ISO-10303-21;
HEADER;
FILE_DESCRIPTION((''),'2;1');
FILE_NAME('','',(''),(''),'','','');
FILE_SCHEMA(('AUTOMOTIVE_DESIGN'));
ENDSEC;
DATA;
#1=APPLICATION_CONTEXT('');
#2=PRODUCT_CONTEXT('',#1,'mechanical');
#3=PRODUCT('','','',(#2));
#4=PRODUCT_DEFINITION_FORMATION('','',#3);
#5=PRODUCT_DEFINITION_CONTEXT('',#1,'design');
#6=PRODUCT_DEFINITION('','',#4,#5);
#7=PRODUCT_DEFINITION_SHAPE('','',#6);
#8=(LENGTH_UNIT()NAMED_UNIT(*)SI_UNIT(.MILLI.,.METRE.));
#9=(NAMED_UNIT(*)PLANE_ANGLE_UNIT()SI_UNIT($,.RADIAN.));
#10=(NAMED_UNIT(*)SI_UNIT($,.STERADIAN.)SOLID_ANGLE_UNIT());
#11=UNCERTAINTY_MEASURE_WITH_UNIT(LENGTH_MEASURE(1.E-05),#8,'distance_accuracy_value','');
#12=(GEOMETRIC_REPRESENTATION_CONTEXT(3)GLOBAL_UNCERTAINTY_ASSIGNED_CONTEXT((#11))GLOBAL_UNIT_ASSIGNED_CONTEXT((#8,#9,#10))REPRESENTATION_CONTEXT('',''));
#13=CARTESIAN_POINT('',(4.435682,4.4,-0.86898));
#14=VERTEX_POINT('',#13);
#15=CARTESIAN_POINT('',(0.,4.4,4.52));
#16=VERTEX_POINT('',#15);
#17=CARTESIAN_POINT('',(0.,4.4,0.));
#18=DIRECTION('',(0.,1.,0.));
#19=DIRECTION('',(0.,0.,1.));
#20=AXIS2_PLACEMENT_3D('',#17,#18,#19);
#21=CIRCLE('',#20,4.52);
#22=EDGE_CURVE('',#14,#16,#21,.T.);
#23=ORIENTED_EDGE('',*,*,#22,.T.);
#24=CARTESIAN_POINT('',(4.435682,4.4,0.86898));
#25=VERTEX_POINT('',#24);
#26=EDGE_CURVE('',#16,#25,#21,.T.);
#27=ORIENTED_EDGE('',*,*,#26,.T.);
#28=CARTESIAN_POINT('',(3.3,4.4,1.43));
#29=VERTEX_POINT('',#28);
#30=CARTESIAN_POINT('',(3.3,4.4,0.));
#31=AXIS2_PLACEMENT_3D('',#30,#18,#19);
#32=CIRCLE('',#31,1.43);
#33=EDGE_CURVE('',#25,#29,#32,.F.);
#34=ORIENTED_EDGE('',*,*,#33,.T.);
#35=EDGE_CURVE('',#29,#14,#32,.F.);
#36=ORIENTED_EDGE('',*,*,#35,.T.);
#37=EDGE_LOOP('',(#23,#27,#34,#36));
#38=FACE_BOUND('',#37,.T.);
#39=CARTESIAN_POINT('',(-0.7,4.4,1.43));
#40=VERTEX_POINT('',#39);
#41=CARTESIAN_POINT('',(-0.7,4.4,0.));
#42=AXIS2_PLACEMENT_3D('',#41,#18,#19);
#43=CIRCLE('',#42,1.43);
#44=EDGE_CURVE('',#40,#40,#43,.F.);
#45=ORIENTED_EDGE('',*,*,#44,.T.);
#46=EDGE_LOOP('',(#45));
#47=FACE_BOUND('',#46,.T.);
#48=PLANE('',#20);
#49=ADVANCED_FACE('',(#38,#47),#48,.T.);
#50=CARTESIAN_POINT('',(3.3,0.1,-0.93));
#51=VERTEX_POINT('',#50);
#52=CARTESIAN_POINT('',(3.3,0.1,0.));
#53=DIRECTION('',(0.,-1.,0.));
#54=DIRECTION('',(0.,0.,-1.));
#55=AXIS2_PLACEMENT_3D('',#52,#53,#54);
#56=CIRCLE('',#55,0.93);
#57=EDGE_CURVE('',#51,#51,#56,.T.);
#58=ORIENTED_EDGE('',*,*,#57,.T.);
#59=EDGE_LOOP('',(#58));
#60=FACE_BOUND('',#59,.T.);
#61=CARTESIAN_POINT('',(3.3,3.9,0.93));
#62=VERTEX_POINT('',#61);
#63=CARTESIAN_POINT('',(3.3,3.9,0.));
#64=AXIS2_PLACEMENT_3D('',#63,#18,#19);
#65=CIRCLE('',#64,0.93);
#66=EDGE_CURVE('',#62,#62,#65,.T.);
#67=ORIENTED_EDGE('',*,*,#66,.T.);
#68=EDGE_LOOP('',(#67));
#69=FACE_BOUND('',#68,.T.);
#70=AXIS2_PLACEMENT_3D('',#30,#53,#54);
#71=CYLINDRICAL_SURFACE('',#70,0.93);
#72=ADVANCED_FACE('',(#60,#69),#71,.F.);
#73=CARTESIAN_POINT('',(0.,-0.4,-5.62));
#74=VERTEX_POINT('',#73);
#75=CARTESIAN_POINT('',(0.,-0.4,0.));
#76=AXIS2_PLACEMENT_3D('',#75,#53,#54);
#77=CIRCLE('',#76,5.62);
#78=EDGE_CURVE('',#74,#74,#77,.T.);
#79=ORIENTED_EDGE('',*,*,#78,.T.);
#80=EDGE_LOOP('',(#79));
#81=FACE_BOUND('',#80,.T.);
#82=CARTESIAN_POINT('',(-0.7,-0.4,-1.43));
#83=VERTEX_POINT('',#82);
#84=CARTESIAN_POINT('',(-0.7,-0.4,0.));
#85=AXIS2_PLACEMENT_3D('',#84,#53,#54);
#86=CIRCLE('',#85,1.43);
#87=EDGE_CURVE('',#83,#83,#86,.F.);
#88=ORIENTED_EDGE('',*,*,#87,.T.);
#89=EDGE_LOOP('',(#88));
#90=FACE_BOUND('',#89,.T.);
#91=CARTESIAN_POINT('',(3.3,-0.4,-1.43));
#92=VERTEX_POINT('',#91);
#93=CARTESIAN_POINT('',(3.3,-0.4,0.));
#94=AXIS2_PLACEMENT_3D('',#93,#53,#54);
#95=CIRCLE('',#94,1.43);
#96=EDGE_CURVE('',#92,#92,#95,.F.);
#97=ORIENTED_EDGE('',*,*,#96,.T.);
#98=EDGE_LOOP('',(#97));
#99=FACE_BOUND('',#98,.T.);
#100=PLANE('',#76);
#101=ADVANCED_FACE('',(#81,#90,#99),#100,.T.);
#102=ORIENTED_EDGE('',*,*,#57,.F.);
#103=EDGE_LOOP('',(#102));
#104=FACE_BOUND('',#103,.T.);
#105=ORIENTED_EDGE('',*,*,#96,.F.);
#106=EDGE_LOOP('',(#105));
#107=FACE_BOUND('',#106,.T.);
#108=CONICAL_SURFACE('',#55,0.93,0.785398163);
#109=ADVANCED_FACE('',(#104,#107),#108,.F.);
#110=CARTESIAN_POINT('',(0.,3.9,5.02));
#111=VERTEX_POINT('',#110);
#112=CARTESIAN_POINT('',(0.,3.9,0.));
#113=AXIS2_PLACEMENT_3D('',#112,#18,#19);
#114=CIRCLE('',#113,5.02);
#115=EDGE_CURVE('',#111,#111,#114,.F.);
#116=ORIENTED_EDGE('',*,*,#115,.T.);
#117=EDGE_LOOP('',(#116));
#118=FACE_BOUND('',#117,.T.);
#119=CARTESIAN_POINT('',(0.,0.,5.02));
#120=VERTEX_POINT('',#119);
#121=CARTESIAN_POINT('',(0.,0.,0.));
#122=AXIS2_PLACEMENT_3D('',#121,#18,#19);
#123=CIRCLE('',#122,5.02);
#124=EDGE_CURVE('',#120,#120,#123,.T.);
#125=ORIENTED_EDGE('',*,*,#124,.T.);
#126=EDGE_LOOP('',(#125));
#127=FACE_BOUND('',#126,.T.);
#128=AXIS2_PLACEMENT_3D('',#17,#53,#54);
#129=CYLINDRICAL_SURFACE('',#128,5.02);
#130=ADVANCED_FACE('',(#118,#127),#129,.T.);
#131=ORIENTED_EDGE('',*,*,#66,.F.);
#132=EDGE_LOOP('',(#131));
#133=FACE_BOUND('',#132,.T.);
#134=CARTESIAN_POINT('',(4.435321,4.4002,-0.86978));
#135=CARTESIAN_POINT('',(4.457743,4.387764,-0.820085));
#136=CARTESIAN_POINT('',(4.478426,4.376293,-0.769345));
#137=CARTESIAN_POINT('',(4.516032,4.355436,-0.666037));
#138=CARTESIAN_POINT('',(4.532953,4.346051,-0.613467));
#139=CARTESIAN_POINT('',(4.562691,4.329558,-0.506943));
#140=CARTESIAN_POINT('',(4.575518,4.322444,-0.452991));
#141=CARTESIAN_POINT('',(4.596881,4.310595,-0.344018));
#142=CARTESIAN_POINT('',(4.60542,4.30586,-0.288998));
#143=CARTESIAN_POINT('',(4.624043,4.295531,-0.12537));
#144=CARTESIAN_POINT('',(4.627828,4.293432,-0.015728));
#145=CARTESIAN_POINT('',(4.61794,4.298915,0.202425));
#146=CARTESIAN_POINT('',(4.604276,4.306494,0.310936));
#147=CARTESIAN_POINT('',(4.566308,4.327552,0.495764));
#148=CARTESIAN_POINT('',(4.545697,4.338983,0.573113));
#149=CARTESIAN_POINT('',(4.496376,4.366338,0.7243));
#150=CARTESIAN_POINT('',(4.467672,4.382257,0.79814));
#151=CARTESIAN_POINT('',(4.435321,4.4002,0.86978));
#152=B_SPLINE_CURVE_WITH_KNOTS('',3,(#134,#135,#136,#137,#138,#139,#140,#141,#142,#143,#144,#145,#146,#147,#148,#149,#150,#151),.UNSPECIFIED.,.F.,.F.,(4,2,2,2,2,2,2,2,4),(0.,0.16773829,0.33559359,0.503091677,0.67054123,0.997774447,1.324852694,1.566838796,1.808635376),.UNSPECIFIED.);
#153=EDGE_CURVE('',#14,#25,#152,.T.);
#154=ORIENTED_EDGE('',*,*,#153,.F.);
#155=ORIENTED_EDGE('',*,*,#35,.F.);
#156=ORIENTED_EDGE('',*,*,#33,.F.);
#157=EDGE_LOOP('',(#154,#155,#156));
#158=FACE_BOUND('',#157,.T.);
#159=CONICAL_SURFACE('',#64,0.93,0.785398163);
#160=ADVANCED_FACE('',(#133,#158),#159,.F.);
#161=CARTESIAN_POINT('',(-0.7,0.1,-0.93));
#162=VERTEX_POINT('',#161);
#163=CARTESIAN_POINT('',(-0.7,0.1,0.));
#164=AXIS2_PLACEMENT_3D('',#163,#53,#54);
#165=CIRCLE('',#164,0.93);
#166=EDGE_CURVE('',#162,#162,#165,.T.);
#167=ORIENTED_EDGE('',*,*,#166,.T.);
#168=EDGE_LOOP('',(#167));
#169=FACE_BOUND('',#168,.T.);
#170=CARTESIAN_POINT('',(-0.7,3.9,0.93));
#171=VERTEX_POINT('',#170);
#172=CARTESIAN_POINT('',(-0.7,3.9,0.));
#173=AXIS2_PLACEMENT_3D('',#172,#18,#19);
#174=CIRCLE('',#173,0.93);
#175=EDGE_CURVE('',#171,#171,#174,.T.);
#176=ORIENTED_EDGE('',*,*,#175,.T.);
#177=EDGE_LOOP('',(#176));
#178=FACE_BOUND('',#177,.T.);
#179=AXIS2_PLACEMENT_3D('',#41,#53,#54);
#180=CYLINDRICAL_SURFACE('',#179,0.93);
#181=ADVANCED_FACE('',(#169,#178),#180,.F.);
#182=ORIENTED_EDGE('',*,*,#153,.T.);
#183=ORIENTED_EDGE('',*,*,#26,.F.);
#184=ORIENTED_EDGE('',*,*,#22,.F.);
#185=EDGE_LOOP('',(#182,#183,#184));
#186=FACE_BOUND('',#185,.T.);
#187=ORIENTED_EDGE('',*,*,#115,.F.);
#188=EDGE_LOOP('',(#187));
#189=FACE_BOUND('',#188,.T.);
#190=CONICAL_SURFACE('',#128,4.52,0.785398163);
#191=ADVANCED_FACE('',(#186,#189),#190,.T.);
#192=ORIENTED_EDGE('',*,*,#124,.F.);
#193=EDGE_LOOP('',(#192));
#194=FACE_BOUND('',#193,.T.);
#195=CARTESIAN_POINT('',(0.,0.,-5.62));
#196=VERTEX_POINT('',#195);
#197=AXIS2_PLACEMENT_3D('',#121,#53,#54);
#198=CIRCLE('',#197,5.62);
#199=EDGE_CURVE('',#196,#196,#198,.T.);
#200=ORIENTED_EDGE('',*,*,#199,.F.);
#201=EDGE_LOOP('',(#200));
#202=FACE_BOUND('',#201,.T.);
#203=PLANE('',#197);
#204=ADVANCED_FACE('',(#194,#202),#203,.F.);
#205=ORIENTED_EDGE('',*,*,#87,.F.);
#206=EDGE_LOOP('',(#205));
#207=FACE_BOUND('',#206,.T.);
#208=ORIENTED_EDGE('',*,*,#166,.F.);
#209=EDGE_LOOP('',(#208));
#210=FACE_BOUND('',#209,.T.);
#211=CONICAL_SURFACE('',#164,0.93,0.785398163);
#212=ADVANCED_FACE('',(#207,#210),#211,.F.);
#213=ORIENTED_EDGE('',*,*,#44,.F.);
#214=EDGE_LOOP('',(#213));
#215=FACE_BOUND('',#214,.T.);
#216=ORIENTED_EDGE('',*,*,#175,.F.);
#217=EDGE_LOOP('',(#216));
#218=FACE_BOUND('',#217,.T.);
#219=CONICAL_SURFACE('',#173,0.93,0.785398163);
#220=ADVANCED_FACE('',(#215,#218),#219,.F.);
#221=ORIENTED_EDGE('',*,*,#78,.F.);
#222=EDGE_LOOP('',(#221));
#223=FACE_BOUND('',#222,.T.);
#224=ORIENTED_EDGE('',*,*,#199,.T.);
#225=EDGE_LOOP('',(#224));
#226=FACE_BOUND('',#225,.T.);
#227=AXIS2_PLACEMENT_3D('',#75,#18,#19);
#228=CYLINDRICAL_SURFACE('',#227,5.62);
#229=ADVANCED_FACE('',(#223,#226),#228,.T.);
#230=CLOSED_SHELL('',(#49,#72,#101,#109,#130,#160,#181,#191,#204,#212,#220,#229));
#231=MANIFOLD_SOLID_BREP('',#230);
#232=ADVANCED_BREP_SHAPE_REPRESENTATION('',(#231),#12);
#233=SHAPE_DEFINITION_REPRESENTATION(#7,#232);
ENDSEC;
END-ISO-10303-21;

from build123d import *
from build123d.topology import SkipClean

# Parameters (mm, degrees)
SKETCH_1_R      = 5.02
SKETCH_1_R_2    = 0.93
EXTRUDE_1_DEPTH = 4.4
EXTRUDE_START   = 0.4
SKETCH_3_R      = 5.62
SKETCH_3_R_2    = 0.93
EXTRUDE_2_DEPTH = 0.4
CHAMFER_1_SIZE  = 0.5


with BuildPart() as part:
    # 草图1 → 凸台-拉伸1 (new body)
    with BuildSketch(Plane(origin=(0, 0, 0), x_dir=(1, 0, 0), z_dir=(0, 1, 0))):
        with Locations(Location((0, 0, 0), (0, 0, 270))):
            Circle(SKETCH_1_R)
        with Locations(Location((3.3, 0, 0), (0, 0, 270))):
            Circle(SKETCH_1_R_2, mode=Mode.SUBTRACT)
        with Locations(Location((-0.7, 0, 0), (0, 0, 90))):
            Circle(SKETCH_1_R_2, mode=Mode.SUBTRACT)
    extrude(amount=EXTRUDE_1_DEPTH)

    # 草图3 → 凸台-拉伸2 (add)
    with SkipClean():  # the faces are left unmerged after this step: merging them gives an invalid solid
        with BuildSketch(Plane.XZ.offset(EXTRUDE_START)):
            with Locations(Location((0, 0, 0), (0, 0, 270))):
                Circle(SKETCH_3_R)
            with Locations(Location((3.3, 0, 0), (0, 0, 270))):
                Circle(SKETCH_3_R_2, mode=Mode.SUBTRACT)
            with Locations(Location((-0.7, 0, 0), (0, 0, 270))):
                Circle(SKETCH_3_R_2, mode=Mode.SUBTRACT)
        extrude(amount=-EXTRUDE_2_DEPTH)

    # 倒角1
    # the kernel refuses this chamfer: 0.5 mm, written as the material it takes off along each edge
    with BuildSketch(Plane(origin=(3.3, -0.4, 0), x_dir=(0, 0, -1), z_dir=(-1, 0, 0))) as chamfer_1_piece_1:
        Polygon((0.93 + CHAMFER_1_SIZE, 0), (0.93, -CHAMFER_1_SIZE), (0.93, 0), align=None)
    revolve(axis=Axis((3.3, -0.4, 0), (0, -1, 0)), mode=Mode.SUBTRACT)
    with BuildSketch(Plane(origin=(-0.7, -0.4, 0), x_dir=(0, 0, -1), z_dir=(-1, 0, 0))) as chamfer_1_piece_2:
        Polygon((0.93 + CHAMFER_1_SIZE, 0), (0.93, -CHAMFER_1_SIZE), (0.93, 0), align=None)
    revolve(axis=Axis((-0.7, -0.4, 0), (0, -1, 0)), mode=Mode.SUBTRACT)
    with BuildSketch(Plane(origin=(0, 4.4, 0), x_dir=(0, 0, 1), z_dir=(-1, 0, 0))) as chamfer_1_piece_3:
        Polygon((5.02, -CHAMFER_1_SIZE), (5.02 - CHAMFER_1_SIZE, 0), (5.02, 0), align=None)
    revolve(axis=Axis((0, 4.4, 0), (0, 1, 0)), mode=Mode.SUBTRACT)
    with BuildSketch(Plane(origin=(3.3, 4.4, 0), x_dir=(0, 0, 1), z_dir=(-1, 0, 0))) as chamfer_1_piece_4:
        Polygon((0.93 + CHAMFER_1_SIZE, 0), (0.93, -CHAMFER_1_SIZE), (0.93, 0), align=None)
    revolve(axis=Axis((3.3, 4.4, 0), (0, 1, 0)), mode=Mode.SUBTRACT)
    with BuildSketch(Plane(origin=(-0.7, 4.4, 0), x_dir=(0, 0, -1), z_dir=(1, 0, 0))) as chamfer_1_piece_5:
        Polygon((0.93 + CHAMFER_1_SIZE, 0), (0.93, -CHAMFER_1_SIZE), (0.93, 0), align=None)
    revolve(axis=Axis((-0.7, 4.4, 0), (0, 1, 0)), mode=Mode.SUBTRACT)


solid = part.part
